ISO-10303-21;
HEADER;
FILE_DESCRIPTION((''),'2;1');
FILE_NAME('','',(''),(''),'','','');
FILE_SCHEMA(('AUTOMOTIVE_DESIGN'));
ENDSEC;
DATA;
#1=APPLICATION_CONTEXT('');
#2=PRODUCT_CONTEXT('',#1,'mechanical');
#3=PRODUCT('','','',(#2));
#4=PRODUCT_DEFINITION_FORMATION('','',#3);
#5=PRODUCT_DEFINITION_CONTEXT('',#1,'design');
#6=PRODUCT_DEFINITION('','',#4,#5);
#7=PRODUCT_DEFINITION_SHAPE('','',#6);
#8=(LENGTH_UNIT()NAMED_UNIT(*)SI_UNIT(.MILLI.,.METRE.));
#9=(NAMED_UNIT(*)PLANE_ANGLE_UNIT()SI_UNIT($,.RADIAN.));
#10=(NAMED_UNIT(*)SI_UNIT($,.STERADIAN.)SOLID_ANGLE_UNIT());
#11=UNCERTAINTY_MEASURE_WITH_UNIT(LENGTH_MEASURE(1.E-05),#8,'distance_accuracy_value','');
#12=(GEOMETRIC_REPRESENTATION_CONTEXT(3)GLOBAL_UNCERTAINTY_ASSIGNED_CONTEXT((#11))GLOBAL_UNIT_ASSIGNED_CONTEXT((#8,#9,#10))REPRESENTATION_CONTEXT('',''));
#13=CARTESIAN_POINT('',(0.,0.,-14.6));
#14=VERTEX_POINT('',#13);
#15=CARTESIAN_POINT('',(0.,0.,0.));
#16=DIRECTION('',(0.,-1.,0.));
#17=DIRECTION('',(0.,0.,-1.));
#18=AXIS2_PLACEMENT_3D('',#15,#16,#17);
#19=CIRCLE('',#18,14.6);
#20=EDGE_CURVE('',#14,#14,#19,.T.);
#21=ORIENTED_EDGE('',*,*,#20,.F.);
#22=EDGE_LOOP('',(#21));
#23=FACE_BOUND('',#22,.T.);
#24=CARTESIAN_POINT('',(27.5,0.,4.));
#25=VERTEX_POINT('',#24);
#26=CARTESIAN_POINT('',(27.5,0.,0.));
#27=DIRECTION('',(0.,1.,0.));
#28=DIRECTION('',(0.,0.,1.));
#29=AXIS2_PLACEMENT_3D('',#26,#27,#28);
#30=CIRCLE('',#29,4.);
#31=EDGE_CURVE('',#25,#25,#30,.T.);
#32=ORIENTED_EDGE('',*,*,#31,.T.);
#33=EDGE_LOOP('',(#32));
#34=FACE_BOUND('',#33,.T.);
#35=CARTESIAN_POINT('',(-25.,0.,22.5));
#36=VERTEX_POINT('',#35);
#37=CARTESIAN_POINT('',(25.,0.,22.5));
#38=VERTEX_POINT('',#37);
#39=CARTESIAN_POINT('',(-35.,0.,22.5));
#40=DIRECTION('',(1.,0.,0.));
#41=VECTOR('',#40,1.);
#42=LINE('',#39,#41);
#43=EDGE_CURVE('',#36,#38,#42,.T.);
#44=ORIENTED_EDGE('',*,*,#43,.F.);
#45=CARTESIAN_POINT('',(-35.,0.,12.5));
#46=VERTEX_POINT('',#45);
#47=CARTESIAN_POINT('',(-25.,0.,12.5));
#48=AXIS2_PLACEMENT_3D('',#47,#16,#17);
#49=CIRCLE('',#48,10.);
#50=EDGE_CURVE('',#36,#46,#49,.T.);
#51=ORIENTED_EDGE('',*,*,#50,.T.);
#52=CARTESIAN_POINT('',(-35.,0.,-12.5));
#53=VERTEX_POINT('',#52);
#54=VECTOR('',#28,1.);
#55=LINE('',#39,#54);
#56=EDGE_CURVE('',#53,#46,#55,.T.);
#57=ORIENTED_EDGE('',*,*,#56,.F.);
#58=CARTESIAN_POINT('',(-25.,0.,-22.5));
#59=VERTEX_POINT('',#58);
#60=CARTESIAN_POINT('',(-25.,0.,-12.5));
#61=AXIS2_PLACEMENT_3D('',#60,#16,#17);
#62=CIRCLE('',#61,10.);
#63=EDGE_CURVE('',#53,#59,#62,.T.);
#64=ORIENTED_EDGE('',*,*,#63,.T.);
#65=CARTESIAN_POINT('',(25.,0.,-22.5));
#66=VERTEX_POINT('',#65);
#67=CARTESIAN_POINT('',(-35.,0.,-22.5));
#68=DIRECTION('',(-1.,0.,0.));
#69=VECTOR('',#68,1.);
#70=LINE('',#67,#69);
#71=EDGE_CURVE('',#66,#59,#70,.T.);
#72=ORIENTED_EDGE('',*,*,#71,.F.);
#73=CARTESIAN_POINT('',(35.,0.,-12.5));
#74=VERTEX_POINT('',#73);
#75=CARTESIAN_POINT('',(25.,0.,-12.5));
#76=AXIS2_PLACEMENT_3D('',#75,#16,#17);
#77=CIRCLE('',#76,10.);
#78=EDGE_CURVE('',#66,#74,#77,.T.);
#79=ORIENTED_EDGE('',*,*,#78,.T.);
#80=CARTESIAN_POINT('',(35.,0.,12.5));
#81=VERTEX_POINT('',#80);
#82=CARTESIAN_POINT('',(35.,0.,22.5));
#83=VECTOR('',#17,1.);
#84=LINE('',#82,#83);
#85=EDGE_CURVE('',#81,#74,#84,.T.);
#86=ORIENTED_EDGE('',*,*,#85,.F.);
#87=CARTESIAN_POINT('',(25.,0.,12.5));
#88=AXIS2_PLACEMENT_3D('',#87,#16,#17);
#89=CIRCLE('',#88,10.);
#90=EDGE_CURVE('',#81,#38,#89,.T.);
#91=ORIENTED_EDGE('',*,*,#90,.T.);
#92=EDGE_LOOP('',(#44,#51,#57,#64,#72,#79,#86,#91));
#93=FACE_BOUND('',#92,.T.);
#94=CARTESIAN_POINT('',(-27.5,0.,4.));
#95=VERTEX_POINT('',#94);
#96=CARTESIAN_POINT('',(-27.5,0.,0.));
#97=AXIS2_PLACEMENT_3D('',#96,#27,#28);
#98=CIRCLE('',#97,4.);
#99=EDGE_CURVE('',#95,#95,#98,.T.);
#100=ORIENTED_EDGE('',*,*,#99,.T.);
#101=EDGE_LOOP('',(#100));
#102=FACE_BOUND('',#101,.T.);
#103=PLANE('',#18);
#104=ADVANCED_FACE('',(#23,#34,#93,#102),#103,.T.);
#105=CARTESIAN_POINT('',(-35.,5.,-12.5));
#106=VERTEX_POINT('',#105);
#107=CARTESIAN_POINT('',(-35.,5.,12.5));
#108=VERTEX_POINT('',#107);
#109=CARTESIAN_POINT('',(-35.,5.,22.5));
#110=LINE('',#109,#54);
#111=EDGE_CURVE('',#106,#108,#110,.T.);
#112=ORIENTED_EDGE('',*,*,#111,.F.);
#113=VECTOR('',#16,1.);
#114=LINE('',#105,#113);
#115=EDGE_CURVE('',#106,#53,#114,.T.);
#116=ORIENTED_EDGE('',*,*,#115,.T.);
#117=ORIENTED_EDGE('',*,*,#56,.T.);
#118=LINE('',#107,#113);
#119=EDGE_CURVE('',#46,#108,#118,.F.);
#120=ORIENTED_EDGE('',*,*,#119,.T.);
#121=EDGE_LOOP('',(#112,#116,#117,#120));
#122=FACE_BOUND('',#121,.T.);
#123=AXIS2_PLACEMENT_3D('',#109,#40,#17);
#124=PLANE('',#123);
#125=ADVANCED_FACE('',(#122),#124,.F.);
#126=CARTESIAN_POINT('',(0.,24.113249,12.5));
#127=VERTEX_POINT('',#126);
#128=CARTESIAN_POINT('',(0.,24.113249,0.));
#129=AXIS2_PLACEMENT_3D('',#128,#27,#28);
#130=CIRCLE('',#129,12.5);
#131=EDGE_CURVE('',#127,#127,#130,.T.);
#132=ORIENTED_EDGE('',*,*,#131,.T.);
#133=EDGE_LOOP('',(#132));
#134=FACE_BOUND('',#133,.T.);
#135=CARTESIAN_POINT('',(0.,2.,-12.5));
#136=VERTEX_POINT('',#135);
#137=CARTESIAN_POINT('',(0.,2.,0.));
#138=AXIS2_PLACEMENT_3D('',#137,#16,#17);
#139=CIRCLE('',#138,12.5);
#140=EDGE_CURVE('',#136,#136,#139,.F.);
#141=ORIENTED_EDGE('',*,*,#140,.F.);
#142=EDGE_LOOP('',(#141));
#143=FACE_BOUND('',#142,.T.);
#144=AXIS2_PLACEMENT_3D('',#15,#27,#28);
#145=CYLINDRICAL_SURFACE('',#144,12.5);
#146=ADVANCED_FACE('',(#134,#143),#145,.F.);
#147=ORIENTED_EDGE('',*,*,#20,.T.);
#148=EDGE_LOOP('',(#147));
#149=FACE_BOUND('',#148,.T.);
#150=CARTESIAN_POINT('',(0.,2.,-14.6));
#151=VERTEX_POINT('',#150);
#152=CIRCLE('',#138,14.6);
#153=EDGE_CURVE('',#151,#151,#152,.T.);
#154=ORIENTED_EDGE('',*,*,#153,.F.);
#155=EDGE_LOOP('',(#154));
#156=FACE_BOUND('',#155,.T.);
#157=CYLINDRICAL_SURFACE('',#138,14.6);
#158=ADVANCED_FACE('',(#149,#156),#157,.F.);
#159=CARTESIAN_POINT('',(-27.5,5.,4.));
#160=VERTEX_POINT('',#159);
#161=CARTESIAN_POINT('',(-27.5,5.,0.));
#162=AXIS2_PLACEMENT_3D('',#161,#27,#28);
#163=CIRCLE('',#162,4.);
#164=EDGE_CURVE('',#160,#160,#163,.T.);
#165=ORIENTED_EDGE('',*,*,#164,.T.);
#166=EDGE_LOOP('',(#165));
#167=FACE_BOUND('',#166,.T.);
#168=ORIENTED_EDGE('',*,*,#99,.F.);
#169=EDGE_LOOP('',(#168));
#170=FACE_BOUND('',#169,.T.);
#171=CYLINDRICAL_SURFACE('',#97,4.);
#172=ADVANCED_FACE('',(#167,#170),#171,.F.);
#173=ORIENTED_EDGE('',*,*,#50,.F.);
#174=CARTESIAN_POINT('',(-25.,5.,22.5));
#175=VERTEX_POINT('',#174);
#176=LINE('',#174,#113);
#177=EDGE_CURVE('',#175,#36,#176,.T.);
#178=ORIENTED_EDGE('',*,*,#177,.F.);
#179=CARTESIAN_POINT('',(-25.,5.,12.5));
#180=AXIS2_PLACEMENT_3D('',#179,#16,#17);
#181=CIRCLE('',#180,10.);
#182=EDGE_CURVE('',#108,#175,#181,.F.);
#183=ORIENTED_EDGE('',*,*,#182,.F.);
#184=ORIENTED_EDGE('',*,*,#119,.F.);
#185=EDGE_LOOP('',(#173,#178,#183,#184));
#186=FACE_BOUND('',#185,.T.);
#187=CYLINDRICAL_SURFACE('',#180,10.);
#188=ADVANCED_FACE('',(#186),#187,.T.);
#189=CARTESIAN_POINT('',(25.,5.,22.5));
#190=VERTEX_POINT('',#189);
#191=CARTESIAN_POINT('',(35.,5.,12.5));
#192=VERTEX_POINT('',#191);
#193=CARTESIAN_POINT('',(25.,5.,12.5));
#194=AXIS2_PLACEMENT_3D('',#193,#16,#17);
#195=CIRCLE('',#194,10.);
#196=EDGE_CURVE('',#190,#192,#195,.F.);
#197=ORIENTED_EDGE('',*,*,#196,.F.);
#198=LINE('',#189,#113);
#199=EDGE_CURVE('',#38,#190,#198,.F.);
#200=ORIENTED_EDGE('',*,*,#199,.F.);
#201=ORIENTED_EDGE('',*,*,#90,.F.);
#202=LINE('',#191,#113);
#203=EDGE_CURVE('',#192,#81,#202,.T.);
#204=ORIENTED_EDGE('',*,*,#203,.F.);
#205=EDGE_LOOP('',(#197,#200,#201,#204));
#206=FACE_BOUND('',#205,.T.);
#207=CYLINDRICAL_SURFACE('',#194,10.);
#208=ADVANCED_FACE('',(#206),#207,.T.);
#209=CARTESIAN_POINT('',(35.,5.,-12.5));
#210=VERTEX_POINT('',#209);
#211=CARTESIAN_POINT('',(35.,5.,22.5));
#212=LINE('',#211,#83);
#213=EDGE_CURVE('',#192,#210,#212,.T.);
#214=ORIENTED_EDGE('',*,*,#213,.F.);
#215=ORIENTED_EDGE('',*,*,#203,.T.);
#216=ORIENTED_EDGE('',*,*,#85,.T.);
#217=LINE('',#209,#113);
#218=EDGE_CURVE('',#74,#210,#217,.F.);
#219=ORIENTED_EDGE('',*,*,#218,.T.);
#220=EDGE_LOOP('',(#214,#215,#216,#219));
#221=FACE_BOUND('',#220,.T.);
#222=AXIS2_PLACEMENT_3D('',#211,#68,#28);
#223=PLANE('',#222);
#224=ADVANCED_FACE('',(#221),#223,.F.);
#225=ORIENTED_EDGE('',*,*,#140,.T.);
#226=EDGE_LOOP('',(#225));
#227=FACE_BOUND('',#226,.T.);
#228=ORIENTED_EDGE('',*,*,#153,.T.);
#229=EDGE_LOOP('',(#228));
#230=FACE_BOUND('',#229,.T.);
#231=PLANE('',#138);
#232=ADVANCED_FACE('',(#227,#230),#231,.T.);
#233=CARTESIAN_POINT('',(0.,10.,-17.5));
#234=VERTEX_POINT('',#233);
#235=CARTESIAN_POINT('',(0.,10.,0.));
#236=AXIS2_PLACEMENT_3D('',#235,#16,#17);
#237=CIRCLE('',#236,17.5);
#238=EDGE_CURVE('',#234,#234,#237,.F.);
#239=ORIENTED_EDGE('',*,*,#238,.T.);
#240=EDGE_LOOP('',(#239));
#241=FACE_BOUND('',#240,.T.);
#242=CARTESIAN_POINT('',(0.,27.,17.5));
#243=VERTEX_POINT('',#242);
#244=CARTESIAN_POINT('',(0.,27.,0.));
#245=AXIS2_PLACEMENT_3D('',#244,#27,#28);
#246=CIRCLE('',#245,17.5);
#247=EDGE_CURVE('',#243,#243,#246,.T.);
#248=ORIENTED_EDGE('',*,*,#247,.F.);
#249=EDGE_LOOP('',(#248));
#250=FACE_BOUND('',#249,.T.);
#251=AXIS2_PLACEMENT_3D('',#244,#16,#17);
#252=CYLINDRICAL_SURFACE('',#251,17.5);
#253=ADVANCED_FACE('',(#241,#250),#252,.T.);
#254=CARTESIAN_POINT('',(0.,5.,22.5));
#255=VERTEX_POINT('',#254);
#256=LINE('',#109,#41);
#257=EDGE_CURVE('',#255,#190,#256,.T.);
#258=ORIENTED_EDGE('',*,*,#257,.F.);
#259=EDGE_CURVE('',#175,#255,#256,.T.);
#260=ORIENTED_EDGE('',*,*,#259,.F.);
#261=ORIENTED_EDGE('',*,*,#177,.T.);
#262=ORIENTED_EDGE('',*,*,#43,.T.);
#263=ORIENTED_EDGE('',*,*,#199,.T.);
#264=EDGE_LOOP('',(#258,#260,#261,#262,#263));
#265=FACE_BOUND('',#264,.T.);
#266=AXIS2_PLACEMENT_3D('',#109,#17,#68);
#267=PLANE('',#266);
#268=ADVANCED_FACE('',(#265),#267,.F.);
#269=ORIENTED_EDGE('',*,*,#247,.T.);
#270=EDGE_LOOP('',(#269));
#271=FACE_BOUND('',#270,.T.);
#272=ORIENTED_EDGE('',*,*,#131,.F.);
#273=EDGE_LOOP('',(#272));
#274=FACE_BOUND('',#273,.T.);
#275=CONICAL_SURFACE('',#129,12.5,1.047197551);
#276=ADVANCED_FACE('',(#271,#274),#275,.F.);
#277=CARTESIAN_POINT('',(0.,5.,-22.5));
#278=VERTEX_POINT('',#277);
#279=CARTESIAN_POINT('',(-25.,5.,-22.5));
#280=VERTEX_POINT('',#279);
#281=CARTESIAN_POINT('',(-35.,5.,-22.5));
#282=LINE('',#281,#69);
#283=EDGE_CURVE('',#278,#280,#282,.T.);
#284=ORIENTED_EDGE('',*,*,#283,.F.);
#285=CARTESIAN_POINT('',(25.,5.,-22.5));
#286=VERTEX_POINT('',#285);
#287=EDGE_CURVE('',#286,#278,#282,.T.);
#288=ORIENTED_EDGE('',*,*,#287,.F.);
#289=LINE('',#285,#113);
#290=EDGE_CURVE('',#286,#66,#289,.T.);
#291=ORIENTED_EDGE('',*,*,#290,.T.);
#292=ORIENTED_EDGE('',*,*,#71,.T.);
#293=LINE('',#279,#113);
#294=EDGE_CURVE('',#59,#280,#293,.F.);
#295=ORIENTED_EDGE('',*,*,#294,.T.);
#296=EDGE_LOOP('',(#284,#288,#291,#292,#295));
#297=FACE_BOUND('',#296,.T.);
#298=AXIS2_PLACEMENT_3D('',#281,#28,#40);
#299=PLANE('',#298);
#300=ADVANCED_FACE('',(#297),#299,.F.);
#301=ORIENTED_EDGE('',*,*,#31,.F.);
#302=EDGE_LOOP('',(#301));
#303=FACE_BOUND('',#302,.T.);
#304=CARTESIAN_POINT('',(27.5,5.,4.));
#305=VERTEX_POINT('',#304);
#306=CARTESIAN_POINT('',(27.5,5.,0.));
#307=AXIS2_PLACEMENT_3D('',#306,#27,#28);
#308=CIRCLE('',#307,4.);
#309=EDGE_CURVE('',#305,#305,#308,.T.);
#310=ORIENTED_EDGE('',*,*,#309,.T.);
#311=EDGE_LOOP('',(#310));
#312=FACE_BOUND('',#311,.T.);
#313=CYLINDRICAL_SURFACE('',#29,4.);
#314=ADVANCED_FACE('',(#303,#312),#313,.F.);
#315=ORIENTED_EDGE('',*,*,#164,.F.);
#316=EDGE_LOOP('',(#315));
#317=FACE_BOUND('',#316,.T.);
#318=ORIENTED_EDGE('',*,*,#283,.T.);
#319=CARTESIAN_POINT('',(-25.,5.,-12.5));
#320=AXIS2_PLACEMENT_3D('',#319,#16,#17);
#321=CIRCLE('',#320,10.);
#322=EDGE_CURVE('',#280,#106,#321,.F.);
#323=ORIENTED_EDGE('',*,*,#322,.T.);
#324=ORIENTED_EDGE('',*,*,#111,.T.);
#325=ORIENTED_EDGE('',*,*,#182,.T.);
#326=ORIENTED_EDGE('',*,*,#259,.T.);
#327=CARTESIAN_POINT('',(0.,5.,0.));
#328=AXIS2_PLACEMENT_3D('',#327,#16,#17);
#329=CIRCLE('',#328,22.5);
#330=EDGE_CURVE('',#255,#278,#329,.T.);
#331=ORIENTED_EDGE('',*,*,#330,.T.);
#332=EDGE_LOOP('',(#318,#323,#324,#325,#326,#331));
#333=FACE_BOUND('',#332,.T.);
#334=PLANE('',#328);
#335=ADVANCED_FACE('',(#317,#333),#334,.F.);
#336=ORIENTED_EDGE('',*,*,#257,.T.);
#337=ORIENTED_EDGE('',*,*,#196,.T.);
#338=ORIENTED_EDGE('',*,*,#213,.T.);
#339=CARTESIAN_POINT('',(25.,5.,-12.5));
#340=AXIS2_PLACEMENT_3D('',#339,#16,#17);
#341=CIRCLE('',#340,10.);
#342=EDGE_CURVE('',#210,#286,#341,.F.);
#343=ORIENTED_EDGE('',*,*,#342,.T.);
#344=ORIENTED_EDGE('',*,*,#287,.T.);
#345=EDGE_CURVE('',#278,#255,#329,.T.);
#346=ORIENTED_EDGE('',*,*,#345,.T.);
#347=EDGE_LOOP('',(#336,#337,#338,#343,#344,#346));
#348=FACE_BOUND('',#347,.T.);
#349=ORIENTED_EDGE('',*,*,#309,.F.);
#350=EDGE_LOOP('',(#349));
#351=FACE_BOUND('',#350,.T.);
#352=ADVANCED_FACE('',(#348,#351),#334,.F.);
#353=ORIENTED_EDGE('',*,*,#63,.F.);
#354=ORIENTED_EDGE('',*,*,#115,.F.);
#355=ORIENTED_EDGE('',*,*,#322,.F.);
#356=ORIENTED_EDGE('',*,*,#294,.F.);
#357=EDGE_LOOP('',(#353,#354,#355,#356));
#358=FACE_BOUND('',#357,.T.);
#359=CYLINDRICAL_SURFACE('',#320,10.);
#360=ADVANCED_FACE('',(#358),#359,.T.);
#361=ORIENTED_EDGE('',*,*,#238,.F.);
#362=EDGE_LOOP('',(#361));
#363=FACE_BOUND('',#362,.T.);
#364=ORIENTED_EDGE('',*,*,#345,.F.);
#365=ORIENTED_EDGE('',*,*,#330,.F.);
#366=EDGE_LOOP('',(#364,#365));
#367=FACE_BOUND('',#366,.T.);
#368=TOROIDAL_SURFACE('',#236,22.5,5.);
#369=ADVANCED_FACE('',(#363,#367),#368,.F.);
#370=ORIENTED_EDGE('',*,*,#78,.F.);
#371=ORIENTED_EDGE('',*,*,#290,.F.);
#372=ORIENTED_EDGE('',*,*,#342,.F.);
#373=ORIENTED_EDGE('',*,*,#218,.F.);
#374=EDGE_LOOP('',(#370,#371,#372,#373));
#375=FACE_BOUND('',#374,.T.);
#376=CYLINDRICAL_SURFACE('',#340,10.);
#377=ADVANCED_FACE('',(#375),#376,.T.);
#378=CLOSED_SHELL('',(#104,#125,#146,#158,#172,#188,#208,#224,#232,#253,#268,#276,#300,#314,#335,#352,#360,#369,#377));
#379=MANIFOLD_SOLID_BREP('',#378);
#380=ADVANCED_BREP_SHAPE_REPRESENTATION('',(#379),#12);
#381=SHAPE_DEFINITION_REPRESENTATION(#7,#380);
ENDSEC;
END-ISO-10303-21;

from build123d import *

# Parameters (mm, degrees)
CROQUIS1_W              = 70
CROQUIS1_H              = 45
SALIENTE_EXTRUIR1_DEPTH = 5
REDONDEO1_R             = 10
REDONDEO2_R             = 10
CROQUIS2_R              = 17.5
SALIENTE_EXTRUIR2_DEPTH = 22
REDONDEO3_R             = 5
CROQUIS3_R              = 12.5
CORTAR_EXTRUIR1_DEPTH   = 50.60090725
CHAFL_N1_SIZE2          = 2.886751346
CHAFL_N1_SIZE           = 5
CROQUIS4_R              = 14.6
CORTAR_EXTRUIR2_DEPTH   = 2
CROQUIS5_R              = 4
CORTAR_EXTRUIR3_DEPTH   = 48.066442398


with BuildPart() as part:
    # Croquis1 → Saliente-Extruir1 (new body)
    with BuildSketch(Plane(origin=(0, 0, 0), x_dir=(1, 0, 0), z_dir=(0, 1, 0))):
        Rectangle(CROQUIS1_W, CROQUIS1_H)
    extrude(amount=SALIENTE_EXTRUIR1_DEPTH)

    # Redondeo1
    redondeo1_edges = [part.edges().sort_by_distance(p)[0] for p in [
        (35, 2.5, 22.5),
    ]]
    fillet(redondeo1_edges, radius=REDONDEO1_R)

    # Redondeo2
    redondeo2_edges = [part.edges().sort_by_distance(p)[0] for p in [
        (-35, 2.5, 22.5),
        (-35, 2.5, -22.5),
        (35, 2.5, -22.5),
    ]]
    fillet(redondeo2_edges, radius=REDONDEO2_R)

    # Croquis2 → Saliente-Extruir2 (add)
    with BuildSketch(Plane(origin=(0, 5, 0), x_dir=(1, 0, 0), z_dir=(0, 1, 0))):
        with Locations(Location((0, 0, 0), (0, 0, 270))):
            Circle(CROQUIS2_R)
    extrude(amount=SALIENTE_EXTRUIR2_DEPTH)

    # Redondeo3
    redondeo3_edges = [part.edges().sort_by_distance(p)[0] for p in [
        (0, 5, -17.5),
    ]]
    fillet(redondeo3_edges, radius=REDONDEO3_R - 0.0001)  # a hair under: the kernel refuses the full size

    # Croquis3 → Cortar-Extruir1 (cut, through all)
    with BuildSketch(Plane(origin=(0, 27, 0), x_dir=(1, 0, 0), z_dir=(0, 1, 0))):
        with Locations(Location((0, 0, 0), (0, 0, 270))):
            Circle(CROQUIS3_R)
    extrude(amount=-CORTAR_EXTRUIR1_DEPTH, mode=Mode.SUBTRACT)

    # Chaflán1
    chafl_n1_edges = [part.edges().sort_by_distance(p)[0] for p in [
        (0, 27, -12.5),
    ]]
    chafl_n1_side = [part.faces().sort_by_distance(p)[0] for p in [
        (0, 27, -12.557735027),
    ]]
    chamfer(chafl_n1_edges, length=CHAFL_N1_SIZE - 0.0001, length2=CHAFL_N1_SIZE2 - 0.0001, reference=chafl_n1_side[0])  # a hair under: the kernel refuses the full size

    # Croquis4 → Cortar-Extruir2 (cut)
    with BuildSketch(Plane(origin=(0, 0, 0), x_dir=(-1, 0, 0), z_dir=(0, -1, 0))):
        with Locations(Location((0, 0, 0), (0, 0, 90))):
            Circle(CROQUIS4_R)
    extrude(amount=-CORTAR_EXTRUIR2_DEPTH, mode=Mode.SUBTRACT)

    # Croquis5 → Cortar-Extruir3 (cut, through all)
    with BuildSketch(Plane(origin=(0, 5, 0), x_dir=(1, 0, 0), z_dir=(0, 1, 0))):
        with Locations(Location((-27.5, 0, 0), (0, 0, 270))):
            Circle(CROQUIS5_R)
        with Locations(Location((27.5, 0, 0), (0, 0, 270))):
            Circle(CROQUIS5_R)
    extrude(amount=-CORTAR_EXTRUIR3_DEPTH, mode=Mode.SUBTRACT)


solid = part.part
